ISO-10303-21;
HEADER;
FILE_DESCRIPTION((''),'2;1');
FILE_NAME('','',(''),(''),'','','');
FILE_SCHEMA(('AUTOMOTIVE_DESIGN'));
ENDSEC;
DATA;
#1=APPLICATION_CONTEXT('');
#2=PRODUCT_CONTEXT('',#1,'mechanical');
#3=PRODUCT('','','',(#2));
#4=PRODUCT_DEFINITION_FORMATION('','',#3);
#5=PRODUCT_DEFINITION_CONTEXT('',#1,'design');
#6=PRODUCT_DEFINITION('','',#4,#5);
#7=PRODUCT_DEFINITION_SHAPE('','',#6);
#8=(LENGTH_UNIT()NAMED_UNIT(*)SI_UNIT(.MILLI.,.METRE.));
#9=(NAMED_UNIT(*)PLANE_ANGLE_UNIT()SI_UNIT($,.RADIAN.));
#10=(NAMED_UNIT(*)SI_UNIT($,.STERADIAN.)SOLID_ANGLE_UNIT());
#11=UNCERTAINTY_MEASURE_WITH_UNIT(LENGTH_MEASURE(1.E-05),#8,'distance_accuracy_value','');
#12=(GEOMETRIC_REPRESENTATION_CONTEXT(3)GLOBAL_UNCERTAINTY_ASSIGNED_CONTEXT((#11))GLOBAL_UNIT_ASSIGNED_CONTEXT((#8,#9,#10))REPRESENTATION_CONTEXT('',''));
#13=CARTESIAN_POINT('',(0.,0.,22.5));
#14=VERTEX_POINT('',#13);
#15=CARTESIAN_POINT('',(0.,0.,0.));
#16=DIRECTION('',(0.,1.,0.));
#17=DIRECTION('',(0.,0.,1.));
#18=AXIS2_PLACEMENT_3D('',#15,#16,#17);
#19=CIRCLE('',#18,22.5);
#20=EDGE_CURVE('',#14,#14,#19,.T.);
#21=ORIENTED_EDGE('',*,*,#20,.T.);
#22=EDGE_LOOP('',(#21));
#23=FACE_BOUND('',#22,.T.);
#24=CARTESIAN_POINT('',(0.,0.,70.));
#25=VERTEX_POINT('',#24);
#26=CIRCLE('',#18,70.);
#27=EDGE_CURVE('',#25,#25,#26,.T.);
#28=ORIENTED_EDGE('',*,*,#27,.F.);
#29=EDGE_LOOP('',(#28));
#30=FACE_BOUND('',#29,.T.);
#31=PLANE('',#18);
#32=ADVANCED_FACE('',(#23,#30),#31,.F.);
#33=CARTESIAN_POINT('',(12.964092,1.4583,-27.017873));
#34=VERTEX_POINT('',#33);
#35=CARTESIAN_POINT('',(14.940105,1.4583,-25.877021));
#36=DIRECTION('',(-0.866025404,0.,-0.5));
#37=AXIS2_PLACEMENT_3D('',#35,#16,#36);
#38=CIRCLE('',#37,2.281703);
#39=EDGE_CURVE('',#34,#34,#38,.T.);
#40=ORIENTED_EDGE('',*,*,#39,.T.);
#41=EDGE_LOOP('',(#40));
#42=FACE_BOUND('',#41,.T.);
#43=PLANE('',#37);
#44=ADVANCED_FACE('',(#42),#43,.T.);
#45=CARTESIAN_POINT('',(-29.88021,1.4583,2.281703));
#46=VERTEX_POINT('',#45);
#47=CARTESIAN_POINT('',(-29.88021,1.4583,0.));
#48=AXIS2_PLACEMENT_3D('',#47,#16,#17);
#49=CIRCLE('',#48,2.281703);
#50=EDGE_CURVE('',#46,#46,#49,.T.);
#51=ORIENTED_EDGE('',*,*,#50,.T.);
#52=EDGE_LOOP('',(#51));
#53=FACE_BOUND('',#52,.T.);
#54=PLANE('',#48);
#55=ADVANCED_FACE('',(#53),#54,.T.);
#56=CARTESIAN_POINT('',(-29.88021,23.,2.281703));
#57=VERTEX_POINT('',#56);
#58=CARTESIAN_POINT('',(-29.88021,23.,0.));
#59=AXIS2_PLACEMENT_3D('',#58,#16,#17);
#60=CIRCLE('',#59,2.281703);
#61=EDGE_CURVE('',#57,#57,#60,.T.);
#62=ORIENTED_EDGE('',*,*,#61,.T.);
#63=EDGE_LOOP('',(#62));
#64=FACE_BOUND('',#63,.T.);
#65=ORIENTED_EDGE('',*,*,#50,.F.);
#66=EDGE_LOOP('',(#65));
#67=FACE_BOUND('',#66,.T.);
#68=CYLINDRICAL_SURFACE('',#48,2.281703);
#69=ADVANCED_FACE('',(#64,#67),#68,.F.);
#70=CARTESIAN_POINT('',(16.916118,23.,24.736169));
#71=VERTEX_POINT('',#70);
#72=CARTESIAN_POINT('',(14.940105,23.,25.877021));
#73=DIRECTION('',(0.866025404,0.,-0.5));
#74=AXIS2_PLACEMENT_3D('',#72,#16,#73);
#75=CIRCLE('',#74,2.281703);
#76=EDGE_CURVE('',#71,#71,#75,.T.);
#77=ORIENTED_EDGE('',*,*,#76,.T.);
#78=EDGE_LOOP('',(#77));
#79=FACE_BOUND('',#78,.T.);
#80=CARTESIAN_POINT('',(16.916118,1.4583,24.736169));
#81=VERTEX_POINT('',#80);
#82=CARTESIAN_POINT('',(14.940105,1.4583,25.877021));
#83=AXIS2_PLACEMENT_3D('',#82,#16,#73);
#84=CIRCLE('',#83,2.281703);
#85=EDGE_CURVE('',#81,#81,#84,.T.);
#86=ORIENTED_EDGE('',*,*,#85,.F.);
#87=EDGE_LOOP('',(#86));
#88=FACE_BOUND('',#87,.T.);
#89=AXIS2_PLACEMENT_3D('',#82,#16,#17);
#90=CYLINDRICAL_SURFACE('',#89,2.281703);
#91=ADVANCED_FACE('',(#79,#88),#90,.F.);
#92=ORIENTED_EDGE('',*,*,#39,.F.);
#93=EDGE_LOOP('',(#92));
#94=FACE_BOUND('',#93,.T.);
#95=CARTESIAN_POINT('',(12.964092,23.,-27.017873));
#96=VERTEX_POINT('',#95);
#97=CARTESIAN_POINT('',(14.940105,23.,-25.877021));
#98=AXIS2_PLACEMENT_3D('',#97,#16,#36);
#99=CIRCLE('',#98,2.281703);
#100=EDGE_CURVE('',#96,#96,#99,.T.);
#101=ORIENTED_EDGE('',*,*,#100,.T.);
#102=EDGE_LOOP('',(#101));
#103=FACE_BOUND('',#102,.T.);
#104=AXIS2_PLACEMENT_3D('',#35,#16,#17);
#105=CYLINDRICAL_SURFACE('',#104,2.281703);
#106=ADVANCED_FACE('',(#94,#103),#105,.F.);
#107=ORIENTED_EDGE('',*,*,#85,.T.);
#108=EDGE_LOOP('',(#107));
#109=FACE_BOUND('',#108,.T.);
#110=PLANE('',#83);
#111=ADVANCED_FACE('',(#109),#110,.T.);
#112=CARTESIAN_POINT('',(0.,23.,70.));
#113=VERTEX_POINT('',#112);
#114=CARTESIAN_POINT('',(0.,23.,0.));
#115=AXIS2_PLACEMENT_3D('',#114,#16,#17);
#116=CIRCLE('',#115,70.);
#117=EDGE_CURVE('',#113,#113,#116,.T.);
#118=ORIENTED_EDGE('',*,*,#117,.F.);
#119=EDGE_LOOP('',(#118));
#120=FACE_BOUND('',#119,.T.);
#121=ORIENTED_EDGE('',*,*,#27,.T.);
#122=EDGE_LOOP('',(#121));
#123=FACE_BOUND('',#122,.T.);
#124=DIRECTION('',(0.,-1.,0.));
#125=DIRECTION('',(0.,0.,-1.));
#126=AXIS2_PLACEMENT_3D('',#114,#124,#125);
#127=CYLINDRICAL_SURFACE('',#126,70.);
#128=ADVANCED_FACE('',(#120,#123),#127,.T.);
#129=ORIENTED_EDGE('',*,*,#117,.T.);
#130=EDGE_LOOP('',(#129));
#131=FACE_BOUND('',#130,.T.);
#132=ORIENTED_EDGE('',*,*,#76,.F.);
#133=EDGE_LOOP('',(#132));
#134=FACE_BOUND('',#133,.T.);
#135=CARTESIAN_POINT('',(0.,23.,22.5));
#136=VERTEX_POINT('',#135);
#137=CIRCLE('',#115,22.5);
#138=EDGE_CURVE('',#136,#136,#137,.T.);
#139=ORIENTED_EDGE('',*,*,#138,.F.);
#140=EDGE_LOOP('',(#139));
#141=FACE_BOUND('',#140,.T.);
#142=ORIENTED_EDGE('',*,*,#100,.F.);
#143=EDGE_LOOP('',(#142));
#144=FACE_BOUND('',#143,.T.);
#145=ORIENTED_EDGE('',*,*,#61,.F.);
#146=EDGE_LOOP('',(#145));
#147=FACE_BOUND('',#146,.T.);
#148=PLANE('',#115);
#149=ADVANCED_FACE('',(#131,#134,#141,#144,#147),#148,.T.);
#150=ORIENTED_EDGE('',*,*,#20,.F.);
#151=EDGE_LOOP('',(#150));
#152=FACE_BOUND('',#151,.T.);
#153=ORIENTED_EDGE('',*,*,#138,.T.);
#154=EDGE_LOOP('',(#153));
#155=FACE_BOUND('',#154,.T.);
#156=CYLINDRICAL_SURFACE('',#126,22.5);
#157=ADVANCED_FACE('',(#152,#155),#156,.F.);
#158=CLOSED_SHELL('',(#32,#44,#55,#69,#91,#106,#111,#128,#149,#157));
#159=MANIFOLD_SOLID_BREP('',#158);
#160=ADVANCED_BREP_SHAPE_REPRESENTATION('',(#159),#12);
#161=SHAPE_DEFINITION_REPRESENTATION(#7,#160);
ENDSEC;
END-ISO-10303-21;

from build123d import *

# Parameters (mm, degrees)
SKETCH1_R           = 70
BOSS_EXTRUDE1_DEPTH = 23
SKETCH2_R           = 22.5
CUT_EXTRUDE1_DEPTH  = 102.631687972
SKETCH3_R           = 2.281703395
CUT_EXTRUDE2_DEPTH  = 21.541699709
CIRPATTERN1_COUNT   = 3


with BuildPart() as part:
    # Sketch1 → Boss-Extrude1 (new body)
    with BuildSketch(Plane(origin=(0, 0, 0), x_dir=(1, 0, 0), z_dir=(0, 1, 0))):
        Circle(SKETCH1_R)
    extrude(amount=BOSS_EXTRUDE1_DEPTH)

    # Sketch2 → Cut-Extrude1 (cut, through all)
    with BuildSketch(Plane(origin=(0, 0, 0), x_dir=(1, 0, 0), z_dir=(0, 1, 0))):
        Circle(SKETCH2_R)
    extrude(amount=CUT_EXTRUDE1_DEPTH, mode=Mode.SUBTRACT)

    # Sketch3 → Cut-Extrude2 (cut)
    with BuildSketch(Plane(origin=(0, 23, 0), x_dir=(1, 0, 0), z_dir=(0, 1, 0))):
        with Locations((-29.880210028, 0)):
            Circle(SKETCH3_R)
    cut_extrude2 = extrude(amount=-CUT_EXTRUDE2_DEPTH, mode=Mode.SUBTRACT)

    # CirPattern1: Cut-Extrude2 ×3 about axis
    cirpattern1_axis = Axis((0, 0, 0), (0, 1, 0))
    for i in range(1, CIRPATTERN1_COUNT):
        add(cut_extrude2.rotate(cirpattern1_axis, i * 360 / CIRPATTERN1_COUNT), mode=Mode.SUBTRACT)


solid = part.part
